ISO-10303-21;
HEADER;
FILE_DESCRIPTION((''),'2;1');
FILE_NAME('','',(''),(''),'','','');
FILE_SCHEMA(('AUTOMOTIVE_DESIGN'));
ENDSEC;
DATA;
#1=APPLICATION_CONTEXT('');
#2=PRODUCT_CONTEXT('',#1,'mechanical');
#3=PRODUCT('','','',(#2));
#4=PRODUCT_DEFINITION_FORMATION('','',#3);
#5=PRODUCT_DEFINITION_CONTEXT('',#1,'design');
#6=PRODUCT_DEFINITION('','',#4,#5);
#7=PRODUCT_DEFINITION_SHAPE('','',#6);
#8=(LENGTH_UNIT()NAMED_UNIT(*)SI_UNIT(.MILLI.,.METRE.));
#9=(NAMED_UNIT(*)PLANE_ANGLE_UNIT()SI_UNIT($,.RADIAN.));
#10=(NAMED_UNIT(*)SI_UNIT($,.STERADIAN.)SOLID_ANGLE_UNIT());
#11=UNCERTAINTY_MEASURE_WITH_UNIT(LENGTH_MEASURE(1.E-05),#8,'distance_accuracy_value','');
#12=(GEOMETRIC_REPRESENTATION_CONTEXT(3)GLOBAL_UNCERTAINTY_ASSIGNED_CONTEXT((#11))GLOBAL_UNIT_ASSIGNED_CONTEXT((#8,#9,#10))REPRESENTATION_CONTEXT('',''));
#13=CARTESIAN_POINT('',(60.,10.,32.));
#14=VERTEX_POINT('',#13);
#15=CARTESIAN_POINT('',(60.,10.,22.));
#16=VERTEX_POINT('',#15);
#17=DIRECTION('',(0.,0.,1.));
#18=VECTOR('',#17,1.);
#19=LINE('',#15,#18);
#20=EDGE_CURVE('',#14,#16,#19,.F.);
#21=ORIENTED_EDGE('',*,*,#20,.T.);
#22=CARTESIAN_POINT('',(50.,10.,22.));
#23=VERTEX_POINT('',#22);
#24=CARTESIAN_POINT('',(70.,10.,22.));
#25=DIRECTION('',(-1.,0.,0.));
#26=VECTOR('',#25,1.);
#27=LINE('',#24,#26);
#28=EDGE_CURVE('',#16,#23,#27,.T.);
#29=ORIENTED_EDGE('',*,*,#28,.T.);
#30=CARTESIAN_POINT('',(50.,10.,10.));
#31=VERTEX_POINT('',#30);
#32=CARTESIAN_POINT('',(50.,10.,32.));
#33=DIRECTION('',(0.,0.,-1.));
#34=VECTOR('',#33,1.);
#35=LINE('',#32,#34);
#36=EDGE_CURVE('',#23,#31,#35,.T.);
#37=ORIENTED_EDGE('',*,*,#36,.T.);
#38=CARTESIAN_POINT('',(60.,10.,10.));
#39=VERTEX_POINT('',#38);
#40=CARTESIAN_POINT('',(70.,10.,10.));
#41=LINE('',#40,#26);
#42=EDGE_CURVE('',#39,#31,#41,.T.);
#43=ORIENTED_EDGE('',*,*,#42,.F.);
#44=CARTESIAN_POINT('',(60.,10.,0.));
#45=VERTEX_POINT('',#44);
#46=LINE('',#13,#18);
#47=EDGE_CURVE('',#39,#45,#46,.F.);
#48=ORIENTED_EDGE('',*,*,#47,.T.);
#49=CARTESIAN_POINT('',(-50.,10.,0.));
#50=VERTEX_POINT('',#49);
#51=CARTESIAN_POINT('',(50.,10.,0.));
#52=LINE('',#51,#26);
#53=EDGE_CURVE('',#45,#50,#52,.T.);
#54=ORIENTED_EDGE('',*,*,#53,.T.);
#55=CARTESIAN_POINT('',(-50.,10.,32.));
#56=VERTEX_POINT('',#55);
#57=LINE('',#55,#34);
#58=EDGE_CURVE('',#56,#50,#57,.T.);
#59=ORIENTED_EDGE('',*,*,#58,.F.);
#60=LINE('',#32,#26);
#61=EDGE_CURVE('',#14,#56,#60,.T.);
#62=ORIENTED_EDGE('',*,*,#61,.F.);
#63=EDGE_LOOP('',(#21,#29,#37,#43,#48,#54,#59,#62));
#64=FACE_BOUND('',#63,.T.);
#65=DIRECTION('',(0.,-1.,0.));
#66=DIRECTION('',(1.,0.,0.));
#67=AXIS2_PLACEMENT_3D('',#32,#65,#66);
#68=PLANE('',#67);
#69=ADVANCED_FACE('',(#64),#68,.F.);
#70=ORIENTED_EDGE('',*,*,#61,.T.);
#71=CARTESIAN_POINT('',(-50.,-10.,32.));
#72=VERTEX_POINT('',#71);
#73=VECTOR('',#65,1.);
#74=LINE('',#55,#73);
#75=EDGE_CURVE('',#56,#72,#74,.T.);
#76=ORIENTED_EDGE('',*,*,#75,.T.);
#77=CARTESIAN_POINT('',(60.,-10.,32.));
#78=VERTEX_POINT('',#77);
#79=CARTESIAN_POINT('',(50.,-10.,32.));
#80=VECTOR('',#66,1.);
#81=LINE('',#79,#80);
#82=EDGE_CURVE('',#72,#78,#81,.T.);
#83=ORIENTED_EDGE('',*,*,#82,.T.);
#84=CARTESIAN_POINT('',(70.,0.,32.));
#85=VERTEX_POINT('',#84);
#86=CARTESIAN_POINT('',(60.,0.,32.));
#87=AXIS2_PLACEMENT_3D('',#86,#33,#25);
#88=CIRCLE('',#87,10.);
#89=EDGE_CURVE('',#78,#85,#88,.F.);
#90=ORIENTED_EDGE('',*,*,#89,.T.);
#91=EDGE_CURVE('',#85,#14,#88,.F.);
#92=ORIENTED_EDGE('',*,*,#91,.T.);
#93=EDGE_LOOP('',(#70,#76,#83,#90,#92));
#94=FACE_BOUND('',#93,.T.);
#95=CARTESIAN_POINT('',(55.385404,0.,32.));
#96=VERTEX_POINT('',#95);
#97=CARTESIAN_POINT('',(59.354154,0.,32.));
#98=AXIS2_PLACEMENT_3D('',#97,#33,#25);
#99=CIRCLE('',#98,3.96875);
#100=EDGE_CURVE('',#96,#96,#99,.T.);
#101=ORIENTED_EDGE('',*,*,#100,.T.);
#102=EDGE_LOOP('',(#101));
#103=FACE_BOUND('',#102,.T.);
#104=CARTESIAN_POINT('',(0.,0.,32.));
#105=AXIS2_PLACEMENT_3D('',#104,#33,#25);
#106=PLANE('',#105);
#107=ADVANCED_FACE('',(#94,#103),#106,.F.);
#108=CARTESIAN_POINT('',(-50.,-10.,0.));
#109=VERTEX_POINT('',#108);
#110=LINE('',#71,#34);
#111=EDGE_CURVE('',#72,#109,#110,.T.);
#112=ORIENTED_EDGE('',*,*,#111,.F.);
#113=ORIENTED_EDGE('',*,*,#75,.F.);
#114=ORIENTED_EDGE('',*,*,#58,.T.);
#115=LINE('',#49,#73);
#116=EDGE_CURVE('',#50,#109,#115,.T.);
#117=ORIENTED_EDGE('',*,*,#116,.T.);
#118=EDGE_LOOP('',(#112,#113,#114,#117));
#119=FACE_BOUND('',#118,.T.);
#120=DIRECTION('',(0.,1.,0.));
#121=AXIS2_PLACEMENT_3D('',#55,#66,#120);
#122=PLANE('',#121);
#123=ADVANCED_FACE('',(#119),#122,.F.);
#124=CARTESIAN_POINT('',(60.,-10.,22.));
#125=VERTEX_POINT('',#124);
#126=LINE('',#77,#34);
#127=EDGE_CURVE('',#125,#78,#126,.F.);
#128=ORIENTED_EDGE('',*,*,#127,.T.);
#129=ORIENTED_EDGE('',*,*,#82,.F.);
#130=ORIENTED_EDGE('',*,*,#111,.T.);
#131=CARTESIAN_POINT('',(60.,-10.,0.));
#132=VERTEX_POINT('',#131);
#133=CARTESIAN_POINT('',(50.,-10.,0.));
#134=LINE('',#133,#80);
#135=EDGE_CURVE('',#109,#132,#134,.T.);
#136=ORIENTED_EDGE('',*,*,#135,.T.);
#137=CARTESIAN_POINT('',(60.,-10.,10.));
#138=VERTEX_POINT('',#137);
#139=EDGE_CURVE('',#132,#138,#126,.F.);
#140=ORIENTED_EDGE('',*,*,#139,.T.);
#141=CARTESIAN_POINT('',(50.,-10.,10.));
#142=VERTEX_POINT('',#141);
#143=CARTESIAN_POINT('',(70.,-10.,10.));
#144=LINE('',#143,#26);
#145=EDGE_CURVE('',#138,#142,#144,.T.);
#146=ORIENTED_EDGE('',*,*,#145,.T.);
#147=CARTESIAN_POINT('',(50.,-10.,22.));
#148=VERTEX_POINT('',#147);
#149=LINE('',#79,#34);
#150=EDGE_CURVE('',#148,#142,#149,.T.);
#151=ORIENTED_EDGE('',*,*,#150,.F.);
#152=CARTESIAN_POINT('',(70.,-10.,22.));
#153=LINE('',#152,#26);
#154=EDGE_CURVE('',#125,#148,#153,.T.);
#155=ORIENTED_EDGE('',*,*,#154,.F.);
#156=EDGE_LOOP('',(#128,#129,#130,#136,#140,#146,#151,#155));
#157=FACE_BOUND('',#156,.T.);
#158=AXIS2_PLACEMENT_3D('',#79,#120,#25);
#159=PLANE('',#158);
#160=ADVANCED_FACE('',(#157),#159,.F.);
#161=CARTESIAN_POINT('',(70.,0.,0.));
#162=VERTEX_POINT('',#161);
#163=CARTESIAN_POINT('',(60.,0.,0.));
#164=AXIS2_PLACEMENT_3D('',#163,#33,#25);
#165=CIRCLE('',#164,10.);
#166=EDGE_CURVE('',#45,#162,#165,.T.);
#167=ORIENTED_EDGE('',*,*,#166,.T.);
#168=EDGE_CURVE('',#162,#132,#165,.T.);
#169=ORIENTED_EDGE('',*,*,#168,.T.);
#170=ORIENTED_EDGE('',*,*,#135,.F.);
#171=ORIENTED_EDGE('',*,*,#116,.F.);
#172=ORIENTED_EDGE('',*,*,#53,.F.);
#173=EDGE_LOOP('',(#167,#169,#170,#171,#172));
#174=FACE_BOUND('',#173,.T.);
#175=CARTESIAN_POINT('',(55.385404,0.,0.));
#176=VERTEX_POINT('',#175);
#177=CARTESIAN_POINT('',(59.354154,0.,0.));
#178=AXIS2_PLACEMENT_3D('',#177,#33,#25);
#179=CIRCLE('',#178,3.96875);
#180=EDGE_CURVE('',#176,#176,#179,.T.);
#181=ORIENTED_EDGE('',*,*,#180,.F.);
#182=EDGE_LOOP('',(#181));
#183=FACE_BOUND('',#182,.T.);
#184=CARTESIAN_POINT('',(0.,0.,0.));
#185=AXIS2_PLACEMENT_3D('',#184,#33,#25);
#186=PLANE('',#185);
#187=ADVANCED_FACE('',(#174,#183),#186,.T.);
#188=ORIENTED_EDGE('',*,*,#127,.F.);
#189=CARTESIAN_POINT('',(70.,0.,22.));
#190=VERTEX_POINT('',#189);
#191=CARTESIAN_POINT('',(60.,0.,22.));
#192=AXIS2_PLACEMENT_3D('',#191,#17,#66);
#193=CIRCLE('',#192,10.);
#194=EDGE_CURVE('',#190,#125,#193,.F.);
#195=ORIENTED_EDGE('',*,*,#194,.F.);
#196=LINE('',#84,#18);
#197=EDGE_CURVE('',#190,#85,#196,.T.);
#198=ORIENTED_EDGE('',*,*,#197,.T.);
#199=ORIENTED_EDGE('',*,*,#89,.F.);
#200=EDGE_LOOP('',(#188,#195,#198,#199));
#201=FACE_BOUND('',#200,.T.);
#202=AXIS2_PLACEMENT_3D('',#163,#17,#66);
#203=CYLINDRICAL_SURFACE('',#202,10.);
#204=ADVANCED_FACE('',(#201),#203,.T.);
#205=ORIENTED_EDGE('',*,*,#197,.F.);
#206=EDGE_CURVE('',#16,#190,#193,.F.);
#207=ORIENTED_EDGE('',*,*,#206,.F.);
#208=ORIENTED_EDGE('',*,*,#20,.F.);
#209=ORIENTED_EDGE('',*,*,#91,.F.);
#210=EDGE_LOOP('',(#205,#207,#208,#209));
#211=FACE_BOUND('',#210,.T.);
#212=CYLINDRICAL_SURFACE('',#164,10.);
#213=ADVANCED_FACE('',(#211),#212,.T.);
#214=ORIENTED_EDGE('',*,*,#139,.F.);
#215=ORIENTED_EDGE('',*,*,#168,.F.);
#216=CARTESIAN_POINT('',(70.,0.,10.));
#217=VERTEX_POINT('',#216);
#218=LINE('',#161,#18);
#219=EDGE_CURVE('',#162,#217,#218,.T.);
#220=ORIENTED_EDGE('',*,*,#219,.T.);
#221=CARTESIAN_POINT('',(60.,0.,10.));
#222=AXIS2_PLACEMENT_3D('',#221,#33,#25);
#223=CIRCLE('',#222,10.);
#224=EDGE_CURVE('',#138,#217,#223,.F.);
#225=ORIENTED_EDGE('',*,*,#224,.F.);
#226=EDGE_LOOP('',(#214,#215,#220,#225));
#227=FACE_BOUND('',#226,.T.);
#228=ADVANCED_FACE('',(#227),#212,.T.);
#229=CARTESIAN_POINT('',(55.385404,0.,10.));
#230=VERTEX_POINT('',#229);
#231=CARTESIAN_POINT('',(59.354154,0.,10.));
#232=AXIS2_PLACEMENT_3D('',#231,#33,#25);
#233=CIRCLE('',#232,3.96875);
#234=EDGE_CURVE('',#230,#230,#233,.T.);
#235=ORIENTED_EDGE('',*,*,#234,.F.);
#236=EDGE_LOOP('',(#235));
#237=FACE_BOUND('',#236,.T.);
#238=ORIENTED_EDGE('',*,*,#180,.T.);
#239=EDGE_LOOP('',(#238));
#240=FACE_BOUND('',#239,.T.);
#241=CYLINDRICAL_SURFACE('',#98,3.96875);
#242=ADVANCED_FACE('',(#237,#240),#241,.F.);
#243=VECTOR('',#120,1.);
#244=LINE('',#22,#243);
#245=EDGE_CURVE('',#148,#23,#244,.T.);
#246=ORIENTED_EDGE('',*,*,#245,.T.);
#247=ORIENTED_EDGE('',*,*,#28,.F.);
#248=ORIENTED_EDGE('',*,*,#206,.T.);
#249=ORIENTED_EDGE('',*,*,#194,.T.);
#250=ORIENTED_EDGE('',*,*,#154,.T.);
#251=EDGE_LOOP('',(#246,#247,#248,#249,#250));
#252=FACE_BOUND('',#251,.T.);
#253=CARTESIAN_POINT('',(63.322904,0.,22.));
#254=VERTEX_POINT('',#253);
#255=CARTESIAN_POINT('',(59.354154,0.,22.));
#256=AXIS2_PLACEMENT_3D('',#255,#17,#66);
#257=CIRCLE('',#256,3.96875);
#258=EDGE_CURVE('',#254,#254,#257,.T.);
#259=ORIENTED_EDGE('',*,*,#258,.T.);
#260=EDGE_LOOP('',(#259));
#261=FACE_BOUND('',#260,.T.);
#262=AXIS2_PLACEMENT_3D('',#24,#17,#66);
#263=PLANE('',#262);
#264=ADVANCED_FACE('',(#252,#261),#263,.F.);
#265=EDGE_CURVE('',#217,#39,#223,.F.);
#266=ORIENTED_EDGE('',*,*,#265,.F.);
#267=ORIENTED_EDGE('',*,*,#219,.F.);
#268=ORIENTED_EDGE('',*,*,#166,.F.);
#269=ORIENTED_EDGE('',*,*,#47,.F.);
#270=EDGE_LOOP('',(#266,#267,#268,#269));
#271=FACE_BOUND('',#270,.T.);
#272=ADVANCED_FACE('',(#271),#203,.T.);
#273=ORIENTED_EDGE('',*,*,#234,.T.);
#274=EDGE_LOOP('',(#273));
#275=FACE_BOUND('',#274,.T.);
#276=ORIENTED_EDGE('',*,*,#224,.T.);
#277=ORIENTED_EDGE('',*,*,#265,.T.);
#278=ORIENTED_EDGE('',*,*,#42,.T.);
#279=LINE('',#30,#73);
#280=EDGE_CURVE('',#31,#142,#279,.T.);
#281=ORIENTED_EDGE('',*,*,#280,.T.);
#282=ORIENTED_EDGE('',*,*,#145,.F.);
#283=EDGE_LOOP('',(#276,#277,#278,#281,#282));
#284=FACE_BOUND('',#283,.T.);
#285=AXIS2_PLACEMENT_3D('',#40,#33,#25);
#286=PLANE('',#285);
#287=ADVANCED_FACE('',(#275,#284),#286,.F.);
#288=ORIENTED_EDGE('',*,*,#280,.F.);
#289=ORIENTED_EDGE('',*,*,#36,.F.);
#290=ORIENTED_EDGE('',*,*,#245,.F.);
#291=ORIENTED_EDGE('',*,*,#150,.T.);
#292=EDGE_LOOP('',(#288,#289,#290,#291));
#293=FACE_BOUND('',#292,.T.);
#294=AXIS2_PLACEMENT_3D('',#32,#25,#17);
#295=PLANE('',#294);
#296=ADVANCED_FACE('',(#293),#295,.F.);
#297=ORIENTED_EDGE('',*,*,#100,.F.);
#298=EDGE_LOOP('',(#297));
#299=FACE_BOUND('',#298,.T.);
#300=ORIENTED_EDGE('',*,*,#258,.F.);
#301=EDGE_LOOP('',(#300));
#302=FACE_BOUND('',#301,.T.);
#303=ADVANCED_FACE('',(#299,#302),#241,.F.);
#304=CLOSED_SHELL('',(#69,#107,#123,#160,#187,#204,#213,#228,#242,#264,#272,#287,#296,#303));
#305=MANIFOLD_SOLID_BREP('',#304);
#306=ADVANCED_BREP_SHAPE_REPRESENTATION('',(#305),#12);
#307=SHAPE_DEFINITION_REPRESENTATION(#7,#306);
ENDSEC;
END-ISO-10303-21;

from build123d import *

# Parameters (mm, degrees)
ESQUISSE2_W             = 100
ESQUISSE2_H             = 20
BOSS_EXTRU_1_DEPTH      = 32
ESQUISSE6_W             = 10
ESQUISSE6_H             = 20
BOSS_EXTRU_3_DEPTH      = 20
CONG_2_R                = 10
ESQUISSE7_R             = 3.96875
ENL_V_MAT_EXTRU_1_DEPTH = 78.614431648


with BuildPart() as part:
    # Esquisse2 → Boss.-Extru.1 (new body)
    with BuildSketch(Plane.XY):
        Rectangle(ESQUISSE2_W, ESQUISSE2_H)
    extrude(amount=BOSS_EXTRU_1_DEPTH)

    # Esquisse6 → Boss.-Extru.3 (add)
    with BuildSketch(Plane(origin=(50, 0, 0), x_dir=(0, 0, -1), z_dir=(1, 0, 0))):
        with Locations((-27, 0)):
            Rectangle(ESQUISSE6_W, ESQUISSE6_H)
        with Locations((-5, 0)):
            Rectangle(ESQUISSE6_W, ESQUISSE6_H)
    extrude(amount=BOSS_EXTRU_3_DEPTH)

    # Congé2
    cong_2_edges = [part.edges().sort_by_distance(p)[0] for p in [
        (70, -10, 27),
        (70, -10, 5),
        (70, 10, 5),
        (70, 10, 27),
    ]]
    fillet(cong_2_edges, radius=CONG_2_R - 0.0001)  # a hair under: the kernel refuses the full size

    # Esquisse7 → Enlèv. mat.-Extru.1 (cut, through all)
    with BuildSketch(Plane(origin=(0, 0, 0), x_dir=(-1, 0, 0), z_dir=(0, 0, -1))):
        with Locations((-59.35415424, 0)):
            Circle(ESQUISSE7_R)
    extrude(amount=-ENL_V_MAT_EXTRU_1_DEPTH, mode=Mode.SUBTRACT)


solid = part.part
